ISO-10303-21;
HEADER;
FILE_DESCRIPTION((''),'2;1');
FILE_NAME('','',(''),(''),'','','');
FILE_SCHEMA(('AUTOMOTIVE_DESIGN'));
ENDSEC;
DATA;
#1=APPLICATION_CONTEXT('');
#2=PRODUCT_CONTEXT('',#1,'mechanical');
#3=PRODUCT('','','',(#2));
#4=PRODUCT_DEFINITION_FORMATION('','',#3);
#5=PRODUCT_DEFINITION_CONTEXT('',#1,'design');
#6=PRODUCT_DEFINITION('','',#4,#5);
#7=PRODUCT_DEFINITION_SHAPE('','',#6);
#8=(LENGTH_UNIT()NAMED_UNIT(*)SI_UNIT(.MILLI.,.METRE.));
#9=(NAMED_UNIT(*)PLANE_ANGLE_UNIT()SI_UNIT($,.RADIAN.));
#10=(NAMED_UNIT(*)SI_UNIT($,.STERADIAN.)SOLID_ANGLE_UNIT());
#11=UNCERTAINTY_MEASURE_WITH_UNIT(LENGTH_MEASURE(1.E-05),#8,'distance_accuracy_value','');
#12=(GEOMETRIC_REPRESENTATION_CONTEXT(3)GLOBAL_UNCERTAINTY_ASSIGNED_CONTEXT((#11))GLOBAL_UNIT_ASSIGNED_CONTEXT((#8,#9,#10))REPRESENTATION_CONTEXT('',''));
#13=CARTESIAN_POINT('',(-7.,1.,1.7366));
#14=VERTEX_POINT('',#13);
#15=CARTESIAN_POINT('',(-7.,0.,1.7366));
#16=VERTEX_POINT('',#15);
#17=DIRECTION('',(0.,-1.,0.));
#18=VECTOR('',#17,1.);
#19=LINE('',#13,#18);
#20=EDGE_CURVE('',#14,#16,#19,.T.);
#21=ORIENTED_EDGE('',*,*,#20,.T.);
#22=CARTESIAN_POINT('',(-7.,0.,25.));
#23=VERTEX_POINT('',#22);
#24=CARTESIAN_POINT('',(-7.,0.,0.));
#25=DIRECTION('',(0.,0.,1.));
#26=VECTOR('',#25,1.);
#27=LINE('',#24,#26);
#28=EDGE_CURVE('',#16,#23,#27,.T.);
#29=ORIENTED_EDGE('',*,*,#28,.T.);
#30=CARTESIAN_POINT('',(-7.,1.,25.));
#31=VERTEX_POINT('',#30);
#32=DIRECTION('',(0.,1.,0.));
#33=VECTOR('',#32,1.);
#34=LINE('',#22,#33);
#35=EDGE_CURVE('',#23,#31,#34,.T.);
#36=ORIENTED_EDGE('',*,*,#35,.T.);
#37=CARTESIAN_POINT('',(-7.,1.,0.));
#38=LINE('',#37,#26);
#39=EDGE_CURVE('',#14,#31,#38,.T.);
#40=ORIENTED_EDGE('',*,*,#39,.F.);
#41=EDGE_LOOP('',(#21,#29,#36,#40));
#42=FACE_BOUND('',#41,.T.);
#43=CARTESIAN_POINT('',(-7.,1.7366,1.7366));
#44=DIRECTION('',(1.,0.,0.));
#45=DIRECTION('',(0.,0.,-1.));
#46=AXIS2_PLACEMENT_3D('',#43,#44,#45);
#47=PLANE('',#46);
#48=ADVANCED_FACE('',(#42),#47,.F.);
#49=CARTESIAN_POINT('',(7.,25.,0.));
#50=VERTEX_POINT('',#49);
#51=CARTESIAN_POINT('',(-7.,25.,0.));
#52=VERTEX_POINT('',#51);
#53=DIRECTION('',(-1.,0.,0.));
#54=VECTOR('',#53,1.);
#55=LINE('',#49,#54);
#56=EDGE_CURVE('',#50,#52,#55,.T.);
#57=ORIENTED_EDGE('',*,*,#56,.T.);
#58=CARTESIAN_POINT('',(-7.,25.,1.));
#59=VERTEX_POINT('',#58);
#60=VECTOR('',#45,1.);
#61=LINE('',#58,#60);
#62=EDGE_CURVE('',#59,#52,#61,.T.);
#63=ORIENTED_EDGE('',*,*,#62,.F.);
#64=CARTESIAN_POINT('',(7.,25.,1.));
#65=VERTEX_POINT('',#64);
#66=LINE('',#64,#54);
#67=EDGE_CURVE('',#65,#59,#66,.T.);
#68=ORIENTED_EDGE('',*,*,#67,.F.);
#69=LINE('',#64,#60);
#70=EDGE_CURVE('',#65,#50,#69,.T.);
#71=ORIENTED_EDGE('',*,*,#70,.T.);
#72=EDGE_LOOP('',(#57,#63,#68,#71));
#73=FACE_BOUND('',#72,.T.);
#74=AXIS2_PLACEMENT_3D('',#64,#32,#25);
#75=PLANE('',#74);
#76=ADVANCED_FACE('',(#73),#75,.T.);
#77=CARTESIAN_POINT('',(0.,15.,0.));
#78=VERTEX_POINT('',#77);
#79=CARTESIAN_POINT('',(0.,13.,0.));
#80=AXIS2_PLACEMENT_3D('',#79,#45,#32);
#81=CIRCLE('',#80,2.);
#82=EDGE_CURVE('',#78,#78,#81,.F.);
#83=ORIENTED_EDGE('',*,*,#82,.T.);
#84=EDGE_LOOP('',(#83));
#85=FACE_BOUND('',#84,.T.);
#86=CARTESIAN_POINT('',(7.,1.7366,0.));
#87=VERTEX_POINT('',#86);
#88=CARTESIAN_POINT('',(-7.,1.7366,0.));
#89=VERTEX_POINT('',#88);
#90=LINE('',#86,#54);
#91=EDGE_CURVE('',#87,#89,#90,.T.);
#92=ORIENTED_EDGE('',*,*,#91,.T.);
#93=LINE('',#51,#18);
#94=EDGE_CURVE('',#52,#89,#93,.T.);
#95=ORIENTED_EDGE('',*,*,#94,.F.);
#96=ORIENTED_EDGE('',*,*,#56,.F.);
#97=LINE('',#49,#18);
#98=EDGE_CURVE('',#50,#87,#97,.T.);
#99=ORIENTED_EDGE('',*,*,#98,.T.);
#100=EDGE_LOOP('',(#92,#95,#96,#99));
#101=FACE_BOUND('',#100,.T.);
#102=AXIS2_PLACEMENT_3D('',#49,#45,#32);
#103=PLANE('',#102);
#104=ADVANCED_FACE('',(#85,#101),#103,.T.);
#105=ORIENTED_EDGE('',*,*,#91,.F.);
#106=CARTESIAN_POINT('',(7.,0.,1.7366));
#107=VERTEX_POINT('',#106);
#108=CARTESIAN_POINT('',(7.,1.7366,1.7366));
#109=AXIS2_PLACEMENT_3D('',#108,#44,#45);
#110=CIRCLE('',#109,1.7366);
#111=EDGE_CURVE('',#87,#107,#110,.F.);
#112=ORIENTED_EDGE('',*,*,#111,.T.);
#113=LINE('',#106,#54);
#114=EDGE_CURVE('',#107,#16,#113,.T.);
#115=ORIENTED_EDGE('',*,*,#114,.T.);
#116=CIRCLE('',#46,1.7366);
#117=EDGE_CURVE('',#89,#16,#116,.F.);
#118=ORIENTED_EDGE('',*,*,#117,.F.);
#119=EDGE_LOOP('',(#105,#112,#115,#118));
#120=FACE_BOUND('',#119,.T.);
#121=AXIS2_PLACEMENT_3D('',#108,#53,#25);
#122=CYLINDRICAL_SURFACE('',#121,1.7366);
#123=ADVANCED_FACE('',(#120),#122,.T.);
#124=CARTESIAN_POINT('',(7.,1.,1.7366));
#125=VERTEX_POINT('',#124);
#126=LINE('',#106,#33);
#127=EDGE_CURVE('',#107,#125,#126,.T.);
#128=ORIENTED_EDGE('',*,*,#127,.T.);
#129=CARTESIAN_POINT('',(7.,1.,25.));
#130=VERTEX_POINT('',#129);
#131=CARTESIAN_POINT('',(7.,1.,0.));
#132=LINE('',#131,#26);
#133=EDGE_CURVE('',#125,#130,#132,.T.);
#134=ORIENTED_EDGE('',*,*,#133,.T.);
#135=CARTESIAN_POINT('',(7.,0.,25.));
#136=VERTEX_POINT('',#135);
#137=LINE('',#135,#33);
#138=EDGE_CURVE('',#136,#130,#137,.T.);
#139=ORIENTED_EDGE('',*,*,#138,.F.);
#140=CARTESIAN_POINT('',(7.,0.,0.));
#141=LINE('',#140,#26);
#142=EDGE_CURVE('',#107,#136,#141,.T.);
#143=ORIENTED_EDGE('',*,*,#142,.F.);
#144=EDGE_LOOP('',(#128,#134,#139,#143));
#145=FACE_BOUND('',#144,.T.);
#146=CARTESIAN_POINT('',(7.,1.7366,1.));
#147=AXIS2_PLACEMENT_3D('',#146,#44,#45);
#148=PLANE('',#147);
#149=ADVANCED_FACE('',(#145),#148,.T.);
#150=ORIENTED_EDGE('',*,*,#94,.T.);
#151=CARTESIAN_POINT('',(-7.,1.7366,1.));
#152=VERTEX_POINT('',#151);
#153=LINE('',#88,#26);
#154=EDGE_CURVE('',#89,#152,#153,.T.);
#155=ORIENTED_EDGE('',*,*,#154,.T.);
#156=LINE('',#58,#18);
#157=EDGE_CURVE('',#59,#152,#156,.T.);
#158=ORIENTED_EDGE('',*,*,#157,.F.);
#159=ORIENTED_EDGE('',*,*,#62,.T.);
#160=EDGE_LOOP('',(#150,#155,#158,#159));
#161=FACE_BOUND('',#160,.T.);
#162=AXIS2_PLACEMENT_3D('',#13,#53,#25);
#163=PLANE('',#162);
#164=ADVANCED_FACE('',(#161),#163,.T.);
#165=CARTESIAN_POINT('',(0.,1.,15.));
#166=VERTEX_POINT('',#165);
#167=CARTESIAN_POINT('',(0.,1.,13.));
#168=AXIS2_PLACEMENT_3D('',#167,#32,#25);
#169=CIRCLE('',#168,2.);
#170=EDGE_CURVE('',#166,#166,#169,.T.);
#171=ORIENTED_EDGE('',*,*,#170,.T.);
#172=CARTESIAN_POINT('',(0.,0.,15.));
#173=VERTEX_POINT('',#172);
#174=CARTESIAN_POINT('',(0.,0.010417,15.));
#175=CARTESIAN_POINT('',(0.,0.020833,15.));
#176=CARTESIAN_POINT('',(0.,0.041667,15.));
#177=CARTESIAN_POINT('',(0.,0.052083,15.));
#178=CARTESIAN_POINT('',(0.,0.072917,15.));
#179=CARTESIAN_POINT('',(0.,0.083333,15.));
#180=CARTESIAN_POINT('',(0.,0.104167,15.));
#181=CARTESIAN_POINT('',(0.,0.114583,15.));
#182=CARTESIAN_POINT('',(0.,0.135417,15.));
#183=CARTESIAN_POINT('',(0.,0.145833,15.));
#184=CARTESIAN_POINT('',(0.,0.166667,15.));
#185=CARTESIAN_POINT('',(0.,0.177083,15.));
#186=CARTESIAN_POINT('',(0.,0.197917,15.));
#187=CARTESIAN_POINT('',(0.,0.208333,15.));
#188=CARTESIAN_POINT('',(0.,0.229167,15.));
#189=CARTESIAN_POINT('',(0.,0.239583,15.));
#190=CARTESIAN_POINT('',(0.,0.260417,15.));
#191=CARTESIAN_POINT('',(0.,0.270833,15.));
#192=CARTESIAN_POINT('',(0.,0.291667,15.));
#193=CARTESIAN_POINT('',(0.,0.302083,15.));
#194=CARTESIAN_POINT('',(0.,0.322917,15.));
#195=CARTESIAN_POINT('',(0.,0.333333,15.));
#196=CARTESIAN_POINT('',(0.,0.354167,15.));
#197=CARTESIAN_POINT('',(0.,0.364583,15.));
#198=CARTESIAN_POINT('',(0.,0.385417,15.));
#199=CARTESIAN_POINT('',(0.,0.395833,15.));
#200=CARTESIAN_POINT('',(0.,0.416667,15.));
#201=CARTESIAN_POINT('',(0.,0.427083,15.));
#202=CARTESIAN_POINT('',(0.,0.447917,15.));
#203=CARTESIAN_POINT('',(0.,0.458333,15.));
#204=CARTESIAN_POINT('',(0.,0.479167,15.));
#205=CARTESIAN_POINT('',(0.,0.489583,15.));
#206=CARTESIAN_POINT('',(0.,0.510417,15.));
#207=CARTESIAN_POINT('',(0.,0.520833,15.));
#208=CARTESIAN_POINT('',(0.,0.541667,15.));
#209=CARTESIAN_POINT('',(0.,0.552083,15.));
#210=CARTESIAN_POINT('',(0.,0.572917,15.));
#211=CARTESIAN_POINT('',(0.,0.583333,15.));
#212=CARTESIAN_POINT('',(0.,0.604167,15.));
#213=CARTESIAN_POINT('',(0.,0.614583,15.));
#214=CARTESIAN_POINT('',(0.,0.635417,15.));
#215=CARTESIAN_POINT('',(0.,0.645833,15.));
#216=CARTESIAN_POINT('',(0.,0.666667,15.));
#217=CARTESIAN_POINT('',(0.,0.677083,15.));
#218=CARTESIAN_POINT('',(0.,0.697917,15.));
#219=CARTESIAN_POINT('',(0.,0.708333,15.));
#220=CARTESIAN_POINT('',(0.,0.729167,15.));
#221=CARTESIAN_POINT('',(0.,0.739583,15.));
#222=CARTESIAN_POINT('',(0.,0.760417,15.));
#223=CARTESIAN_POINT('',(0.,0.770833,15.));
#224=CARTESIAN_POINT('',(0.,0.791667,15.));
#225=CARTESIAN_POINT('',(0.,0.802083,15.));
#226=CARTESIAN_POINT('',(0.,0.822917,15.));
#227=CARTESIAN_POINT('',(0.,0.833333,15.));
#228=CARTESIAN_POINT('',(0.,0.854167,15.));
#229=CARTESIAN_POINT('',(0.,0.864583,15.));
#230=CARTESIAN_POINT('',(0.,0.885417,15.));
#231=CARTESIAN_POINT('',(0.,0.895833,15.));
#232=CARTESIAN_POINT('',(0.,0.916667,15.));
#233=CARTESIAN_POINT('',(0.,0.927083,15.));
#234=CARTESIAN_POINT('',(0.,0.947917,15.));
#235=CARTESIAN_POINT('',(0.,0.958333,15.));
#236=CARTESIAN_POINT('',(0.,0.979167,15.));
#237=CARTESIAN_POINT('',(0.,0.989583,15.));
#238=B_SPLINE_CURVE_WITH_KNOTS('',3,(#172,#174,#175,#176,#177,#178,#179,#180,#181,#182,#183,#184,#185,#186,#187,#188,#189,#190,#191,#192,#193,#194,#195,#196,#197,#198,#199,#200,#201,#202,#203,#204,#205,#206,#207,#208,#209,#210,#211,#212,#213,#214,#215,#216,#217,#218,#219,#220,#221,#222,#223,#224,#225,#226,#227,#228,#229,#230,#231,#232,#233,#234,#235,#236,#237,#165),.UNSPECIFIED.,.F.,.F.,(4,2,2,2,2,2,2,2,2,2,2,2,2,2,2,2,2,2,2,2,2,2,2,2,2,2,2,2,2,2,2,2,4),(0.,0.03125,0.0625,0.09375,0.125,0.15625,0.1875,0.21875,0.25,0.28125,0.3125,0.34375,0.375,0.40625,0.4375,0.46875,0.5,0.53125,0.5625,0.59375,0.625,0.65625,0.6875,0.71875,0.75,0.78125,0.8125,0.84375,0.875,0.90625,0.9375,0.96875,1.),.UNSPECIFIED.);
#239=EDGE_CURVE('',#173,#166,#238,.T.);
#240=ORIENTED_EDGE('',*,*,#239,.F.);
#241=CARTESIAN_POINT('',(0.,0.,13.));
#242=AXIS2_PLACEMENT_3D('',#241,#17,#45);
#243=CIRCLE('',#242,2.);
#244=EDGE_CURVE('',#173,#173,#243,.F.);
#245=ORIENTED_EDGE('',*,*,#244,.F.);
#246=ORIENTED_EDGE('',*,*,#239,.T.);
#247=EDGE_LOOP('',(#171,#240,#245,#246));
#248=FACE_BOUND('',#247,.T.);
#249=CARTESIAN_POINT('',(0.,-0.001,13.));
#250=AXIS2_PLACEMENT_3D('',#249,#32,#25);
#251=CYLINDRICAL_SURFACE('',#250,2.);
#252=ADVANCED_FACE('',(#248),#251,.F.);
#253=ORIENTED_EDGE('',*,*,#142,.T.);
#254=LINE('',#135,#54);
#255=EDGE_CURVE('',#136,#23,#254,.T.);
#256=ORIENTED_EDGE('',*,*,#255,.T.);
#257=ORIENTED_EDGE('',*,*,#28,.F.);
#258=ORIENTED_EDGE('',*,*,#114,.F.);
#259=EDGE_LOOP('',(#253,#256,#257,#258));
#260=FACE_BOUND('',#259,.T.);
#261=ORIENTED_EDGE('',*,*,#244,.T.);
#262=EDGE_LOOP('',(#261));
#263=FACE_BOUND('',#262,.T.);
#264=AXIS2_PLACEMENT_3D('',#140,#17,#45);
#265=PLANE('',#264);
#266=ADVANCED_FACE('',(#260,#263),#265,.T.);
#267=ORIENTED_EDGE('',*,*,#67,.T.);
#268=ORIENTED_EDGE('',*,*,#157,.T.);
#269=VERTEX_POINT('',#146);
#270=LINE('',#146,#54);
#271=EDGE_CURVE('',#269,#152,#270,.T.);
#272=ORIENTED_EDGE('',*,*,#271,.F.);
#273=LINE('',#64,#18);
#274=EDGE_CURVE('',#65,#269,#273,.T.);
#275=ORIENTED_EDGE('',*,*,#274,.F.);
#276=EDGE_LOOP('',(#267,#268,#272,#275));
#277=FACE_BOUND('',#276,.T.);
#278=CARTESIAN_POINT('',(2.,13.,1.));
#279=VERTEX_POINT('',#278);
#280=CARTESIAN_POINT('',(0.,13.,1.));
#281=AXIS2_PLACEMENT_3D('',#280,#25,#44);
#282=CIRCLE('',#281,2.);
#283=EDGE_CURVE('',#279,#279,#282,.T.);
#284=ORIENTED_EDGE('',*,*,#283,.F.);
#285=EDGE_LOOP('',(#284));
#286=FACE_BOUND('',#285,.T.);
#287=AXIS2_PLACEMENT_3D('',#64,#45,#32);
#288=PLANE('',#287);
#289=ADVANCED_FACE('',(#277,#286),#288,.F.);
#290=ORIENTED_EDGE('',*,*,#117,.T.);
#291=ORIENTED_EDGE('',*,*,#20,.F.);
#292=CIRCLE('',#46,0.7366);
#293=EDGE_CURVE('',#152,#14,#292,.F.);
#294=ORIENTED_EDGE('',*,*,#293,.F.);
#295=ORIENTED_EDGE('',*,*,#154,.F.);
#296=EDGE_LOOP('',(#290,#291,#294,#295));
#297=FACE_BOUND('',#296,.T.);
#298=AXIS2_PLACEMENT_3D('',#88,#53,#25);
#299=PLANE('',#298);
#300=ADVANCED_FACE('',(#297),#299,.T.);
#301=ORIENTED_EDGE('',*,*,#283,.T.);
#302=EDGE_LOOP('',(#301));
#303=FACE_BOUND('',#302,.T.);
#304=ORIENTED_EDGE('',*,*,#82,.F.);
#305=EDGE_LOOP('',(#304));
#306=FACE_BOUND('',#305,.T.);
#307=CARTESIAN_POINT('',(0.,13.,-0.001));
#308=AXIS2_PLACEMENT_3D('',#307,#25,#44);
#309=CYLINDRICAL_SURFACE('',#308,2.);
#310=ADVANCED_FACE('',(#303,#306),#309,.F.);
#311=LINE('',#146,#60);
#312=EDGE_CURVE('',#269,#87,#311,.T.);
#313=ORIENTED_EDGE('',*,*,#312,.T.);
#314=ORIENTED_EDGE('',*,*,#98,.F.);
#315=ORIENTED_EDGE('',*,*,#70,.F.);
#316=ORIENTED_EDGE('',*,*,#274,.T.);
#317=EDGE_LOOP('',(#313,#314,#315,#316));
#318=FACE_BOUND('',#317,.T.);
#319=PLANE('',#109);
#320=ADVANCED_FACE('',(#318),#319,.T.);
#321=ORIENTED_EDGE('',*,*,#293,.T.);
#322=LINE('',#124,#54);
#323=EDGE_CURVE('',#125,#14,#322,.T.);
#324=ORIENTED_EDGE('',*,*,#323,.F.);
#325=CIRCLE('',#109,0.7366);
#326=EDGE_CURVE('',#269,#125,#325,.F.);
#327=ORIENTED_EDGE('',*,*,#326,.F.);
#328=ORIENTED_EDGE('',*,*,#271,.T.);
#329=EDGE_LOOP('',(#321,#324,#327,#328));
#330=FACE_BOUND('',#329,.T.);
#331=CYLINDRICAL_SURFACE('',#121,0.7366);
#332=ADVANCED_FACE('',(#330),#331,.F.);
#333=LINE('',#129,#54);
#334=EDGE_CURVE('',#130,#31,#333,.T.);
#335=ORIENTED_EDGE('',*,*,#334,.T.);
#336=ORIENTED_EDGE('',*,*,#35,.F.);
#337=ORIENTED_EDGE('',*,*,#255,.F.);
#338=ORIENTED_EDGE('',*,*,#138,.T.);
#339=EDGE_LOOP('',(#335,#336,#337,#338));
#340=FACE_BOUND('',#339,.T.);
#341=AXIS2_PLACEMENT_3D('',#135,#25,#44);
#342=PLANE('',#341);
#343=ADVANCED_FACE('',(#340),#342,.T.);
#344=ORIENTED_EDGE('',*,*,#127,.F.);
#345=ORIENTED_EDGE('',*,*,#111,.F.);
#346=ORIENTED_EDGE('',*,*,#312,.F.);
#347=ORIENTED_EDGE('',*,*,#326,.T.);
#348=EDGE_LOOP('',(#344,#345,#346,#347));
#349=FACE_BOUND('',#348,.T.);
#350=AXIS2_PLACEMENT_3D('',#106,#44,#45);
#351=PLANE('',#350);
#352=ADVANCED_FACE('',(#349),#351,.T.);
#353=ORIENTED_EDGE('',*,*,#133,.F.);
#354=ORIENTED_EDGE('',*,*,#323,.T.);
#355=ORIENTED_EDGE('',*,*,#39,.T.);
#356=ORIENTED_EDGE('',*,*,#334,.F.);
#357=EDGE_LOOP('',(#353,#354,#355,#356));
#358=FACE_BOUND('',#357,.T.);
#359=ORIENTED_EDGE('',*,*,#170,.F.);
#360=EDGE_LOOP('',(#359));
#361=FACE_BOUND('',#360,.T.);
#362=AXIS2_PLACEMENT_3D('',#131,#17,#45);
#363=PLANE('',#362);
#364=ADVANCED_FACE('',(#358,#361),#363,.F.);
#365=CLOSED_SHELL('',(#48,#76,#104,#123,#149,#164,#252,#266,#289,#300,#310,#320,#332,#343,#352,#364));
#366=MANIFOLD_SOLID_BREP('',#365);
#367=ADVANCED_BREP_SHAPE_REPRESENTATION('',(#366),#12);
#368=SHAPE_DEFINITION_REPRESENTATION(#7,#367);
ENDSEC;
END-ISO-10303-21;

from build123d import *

# Parameters (mm, degrees)
BRIDA_BASE1_DEPTH     = 7
CORTAR_EXTRUIR1_REACH = 37.355
CROQUIS6_R            = 2
CORTAR_EXTRUIR2_REACH = 37.355
CROQUIS9_R            = 2


# Sheet-metal steps are written as plain solids
with BuildPart() as part:
    # Croquis1 → Brida base1 (new, symmetric)
    with BuildSketch(Plane(origin=(0, 0, 0), x_dir=(0, 0, -1), z_dir=(1, 0, 0))):
        with BuildLine():
            Line((0, 25), (0, 1.7366))
            ThreePointArc((0, 1.7366), (-0.508638364, 0.508638364), (-1.7366, 0))
            Line((-1.7366, 0), (-25, 0))
            Line((-25, 0), (-25, 1))
            Line((-25, 1), (-1.7366, 1))
            ThreePointArc((-1.7366, 1), (-1.215745145, 1.215745145), (-1, 1.7366))
            Line((-1, 1.7366), (-1, 25))
            Line((-1, 25), (0, 25))
        make_face()
    extrude(amount=BRIDA_BASE1_DEPTH, both=True)

    # Croquis6 → Cortar-Extruir1 (cut, up to next)
    with BuildSketch(Plane.XY.offset(1), mode=Mode.PRIVATE) as cortar_extruir1_sk1:
        with Locations((0, 13)):
            Circle(CROQUIS6_R)
    cortar_extruir1_tool1 = extrude(cortar_extruir1_sk1.sketch, amount=-CORTAR_EXTRUIR1_REACH, mode=Mode.PRIVATE) & part.part
    add(cortar_extruir1_tool1.solids().sort_by_distance((0, 13, 1))[0], mode=Mode.SUBTRACT)

    # Croquis9 → Cortar-Extruir2 (cut, up to next)
    with BuildSketch(Plane(origin=(0, 1, 0), x_dir=(1, 0, 0), z_dir=(0, 1, 0)), mode=Mode.PRIVATE) as cortar_extruir2_sk1:
        with Locations(Location((0, -13, 0), (0, 0, 270))):
            Circle(CROQUIS9_R)
    cortar_extruir2_tool1 = extrude(cortar_extruir2_sk1.sketch, amount=-CORTAR_EXTRUIR2_REACH, mode=Mode.PRIVATE) & part.part
    add(cortar_extruir2_tool1.solids().sort_by_distance((0, 1, 13))[0], mode=Mode.SUBTRACT)


solid = part.part
